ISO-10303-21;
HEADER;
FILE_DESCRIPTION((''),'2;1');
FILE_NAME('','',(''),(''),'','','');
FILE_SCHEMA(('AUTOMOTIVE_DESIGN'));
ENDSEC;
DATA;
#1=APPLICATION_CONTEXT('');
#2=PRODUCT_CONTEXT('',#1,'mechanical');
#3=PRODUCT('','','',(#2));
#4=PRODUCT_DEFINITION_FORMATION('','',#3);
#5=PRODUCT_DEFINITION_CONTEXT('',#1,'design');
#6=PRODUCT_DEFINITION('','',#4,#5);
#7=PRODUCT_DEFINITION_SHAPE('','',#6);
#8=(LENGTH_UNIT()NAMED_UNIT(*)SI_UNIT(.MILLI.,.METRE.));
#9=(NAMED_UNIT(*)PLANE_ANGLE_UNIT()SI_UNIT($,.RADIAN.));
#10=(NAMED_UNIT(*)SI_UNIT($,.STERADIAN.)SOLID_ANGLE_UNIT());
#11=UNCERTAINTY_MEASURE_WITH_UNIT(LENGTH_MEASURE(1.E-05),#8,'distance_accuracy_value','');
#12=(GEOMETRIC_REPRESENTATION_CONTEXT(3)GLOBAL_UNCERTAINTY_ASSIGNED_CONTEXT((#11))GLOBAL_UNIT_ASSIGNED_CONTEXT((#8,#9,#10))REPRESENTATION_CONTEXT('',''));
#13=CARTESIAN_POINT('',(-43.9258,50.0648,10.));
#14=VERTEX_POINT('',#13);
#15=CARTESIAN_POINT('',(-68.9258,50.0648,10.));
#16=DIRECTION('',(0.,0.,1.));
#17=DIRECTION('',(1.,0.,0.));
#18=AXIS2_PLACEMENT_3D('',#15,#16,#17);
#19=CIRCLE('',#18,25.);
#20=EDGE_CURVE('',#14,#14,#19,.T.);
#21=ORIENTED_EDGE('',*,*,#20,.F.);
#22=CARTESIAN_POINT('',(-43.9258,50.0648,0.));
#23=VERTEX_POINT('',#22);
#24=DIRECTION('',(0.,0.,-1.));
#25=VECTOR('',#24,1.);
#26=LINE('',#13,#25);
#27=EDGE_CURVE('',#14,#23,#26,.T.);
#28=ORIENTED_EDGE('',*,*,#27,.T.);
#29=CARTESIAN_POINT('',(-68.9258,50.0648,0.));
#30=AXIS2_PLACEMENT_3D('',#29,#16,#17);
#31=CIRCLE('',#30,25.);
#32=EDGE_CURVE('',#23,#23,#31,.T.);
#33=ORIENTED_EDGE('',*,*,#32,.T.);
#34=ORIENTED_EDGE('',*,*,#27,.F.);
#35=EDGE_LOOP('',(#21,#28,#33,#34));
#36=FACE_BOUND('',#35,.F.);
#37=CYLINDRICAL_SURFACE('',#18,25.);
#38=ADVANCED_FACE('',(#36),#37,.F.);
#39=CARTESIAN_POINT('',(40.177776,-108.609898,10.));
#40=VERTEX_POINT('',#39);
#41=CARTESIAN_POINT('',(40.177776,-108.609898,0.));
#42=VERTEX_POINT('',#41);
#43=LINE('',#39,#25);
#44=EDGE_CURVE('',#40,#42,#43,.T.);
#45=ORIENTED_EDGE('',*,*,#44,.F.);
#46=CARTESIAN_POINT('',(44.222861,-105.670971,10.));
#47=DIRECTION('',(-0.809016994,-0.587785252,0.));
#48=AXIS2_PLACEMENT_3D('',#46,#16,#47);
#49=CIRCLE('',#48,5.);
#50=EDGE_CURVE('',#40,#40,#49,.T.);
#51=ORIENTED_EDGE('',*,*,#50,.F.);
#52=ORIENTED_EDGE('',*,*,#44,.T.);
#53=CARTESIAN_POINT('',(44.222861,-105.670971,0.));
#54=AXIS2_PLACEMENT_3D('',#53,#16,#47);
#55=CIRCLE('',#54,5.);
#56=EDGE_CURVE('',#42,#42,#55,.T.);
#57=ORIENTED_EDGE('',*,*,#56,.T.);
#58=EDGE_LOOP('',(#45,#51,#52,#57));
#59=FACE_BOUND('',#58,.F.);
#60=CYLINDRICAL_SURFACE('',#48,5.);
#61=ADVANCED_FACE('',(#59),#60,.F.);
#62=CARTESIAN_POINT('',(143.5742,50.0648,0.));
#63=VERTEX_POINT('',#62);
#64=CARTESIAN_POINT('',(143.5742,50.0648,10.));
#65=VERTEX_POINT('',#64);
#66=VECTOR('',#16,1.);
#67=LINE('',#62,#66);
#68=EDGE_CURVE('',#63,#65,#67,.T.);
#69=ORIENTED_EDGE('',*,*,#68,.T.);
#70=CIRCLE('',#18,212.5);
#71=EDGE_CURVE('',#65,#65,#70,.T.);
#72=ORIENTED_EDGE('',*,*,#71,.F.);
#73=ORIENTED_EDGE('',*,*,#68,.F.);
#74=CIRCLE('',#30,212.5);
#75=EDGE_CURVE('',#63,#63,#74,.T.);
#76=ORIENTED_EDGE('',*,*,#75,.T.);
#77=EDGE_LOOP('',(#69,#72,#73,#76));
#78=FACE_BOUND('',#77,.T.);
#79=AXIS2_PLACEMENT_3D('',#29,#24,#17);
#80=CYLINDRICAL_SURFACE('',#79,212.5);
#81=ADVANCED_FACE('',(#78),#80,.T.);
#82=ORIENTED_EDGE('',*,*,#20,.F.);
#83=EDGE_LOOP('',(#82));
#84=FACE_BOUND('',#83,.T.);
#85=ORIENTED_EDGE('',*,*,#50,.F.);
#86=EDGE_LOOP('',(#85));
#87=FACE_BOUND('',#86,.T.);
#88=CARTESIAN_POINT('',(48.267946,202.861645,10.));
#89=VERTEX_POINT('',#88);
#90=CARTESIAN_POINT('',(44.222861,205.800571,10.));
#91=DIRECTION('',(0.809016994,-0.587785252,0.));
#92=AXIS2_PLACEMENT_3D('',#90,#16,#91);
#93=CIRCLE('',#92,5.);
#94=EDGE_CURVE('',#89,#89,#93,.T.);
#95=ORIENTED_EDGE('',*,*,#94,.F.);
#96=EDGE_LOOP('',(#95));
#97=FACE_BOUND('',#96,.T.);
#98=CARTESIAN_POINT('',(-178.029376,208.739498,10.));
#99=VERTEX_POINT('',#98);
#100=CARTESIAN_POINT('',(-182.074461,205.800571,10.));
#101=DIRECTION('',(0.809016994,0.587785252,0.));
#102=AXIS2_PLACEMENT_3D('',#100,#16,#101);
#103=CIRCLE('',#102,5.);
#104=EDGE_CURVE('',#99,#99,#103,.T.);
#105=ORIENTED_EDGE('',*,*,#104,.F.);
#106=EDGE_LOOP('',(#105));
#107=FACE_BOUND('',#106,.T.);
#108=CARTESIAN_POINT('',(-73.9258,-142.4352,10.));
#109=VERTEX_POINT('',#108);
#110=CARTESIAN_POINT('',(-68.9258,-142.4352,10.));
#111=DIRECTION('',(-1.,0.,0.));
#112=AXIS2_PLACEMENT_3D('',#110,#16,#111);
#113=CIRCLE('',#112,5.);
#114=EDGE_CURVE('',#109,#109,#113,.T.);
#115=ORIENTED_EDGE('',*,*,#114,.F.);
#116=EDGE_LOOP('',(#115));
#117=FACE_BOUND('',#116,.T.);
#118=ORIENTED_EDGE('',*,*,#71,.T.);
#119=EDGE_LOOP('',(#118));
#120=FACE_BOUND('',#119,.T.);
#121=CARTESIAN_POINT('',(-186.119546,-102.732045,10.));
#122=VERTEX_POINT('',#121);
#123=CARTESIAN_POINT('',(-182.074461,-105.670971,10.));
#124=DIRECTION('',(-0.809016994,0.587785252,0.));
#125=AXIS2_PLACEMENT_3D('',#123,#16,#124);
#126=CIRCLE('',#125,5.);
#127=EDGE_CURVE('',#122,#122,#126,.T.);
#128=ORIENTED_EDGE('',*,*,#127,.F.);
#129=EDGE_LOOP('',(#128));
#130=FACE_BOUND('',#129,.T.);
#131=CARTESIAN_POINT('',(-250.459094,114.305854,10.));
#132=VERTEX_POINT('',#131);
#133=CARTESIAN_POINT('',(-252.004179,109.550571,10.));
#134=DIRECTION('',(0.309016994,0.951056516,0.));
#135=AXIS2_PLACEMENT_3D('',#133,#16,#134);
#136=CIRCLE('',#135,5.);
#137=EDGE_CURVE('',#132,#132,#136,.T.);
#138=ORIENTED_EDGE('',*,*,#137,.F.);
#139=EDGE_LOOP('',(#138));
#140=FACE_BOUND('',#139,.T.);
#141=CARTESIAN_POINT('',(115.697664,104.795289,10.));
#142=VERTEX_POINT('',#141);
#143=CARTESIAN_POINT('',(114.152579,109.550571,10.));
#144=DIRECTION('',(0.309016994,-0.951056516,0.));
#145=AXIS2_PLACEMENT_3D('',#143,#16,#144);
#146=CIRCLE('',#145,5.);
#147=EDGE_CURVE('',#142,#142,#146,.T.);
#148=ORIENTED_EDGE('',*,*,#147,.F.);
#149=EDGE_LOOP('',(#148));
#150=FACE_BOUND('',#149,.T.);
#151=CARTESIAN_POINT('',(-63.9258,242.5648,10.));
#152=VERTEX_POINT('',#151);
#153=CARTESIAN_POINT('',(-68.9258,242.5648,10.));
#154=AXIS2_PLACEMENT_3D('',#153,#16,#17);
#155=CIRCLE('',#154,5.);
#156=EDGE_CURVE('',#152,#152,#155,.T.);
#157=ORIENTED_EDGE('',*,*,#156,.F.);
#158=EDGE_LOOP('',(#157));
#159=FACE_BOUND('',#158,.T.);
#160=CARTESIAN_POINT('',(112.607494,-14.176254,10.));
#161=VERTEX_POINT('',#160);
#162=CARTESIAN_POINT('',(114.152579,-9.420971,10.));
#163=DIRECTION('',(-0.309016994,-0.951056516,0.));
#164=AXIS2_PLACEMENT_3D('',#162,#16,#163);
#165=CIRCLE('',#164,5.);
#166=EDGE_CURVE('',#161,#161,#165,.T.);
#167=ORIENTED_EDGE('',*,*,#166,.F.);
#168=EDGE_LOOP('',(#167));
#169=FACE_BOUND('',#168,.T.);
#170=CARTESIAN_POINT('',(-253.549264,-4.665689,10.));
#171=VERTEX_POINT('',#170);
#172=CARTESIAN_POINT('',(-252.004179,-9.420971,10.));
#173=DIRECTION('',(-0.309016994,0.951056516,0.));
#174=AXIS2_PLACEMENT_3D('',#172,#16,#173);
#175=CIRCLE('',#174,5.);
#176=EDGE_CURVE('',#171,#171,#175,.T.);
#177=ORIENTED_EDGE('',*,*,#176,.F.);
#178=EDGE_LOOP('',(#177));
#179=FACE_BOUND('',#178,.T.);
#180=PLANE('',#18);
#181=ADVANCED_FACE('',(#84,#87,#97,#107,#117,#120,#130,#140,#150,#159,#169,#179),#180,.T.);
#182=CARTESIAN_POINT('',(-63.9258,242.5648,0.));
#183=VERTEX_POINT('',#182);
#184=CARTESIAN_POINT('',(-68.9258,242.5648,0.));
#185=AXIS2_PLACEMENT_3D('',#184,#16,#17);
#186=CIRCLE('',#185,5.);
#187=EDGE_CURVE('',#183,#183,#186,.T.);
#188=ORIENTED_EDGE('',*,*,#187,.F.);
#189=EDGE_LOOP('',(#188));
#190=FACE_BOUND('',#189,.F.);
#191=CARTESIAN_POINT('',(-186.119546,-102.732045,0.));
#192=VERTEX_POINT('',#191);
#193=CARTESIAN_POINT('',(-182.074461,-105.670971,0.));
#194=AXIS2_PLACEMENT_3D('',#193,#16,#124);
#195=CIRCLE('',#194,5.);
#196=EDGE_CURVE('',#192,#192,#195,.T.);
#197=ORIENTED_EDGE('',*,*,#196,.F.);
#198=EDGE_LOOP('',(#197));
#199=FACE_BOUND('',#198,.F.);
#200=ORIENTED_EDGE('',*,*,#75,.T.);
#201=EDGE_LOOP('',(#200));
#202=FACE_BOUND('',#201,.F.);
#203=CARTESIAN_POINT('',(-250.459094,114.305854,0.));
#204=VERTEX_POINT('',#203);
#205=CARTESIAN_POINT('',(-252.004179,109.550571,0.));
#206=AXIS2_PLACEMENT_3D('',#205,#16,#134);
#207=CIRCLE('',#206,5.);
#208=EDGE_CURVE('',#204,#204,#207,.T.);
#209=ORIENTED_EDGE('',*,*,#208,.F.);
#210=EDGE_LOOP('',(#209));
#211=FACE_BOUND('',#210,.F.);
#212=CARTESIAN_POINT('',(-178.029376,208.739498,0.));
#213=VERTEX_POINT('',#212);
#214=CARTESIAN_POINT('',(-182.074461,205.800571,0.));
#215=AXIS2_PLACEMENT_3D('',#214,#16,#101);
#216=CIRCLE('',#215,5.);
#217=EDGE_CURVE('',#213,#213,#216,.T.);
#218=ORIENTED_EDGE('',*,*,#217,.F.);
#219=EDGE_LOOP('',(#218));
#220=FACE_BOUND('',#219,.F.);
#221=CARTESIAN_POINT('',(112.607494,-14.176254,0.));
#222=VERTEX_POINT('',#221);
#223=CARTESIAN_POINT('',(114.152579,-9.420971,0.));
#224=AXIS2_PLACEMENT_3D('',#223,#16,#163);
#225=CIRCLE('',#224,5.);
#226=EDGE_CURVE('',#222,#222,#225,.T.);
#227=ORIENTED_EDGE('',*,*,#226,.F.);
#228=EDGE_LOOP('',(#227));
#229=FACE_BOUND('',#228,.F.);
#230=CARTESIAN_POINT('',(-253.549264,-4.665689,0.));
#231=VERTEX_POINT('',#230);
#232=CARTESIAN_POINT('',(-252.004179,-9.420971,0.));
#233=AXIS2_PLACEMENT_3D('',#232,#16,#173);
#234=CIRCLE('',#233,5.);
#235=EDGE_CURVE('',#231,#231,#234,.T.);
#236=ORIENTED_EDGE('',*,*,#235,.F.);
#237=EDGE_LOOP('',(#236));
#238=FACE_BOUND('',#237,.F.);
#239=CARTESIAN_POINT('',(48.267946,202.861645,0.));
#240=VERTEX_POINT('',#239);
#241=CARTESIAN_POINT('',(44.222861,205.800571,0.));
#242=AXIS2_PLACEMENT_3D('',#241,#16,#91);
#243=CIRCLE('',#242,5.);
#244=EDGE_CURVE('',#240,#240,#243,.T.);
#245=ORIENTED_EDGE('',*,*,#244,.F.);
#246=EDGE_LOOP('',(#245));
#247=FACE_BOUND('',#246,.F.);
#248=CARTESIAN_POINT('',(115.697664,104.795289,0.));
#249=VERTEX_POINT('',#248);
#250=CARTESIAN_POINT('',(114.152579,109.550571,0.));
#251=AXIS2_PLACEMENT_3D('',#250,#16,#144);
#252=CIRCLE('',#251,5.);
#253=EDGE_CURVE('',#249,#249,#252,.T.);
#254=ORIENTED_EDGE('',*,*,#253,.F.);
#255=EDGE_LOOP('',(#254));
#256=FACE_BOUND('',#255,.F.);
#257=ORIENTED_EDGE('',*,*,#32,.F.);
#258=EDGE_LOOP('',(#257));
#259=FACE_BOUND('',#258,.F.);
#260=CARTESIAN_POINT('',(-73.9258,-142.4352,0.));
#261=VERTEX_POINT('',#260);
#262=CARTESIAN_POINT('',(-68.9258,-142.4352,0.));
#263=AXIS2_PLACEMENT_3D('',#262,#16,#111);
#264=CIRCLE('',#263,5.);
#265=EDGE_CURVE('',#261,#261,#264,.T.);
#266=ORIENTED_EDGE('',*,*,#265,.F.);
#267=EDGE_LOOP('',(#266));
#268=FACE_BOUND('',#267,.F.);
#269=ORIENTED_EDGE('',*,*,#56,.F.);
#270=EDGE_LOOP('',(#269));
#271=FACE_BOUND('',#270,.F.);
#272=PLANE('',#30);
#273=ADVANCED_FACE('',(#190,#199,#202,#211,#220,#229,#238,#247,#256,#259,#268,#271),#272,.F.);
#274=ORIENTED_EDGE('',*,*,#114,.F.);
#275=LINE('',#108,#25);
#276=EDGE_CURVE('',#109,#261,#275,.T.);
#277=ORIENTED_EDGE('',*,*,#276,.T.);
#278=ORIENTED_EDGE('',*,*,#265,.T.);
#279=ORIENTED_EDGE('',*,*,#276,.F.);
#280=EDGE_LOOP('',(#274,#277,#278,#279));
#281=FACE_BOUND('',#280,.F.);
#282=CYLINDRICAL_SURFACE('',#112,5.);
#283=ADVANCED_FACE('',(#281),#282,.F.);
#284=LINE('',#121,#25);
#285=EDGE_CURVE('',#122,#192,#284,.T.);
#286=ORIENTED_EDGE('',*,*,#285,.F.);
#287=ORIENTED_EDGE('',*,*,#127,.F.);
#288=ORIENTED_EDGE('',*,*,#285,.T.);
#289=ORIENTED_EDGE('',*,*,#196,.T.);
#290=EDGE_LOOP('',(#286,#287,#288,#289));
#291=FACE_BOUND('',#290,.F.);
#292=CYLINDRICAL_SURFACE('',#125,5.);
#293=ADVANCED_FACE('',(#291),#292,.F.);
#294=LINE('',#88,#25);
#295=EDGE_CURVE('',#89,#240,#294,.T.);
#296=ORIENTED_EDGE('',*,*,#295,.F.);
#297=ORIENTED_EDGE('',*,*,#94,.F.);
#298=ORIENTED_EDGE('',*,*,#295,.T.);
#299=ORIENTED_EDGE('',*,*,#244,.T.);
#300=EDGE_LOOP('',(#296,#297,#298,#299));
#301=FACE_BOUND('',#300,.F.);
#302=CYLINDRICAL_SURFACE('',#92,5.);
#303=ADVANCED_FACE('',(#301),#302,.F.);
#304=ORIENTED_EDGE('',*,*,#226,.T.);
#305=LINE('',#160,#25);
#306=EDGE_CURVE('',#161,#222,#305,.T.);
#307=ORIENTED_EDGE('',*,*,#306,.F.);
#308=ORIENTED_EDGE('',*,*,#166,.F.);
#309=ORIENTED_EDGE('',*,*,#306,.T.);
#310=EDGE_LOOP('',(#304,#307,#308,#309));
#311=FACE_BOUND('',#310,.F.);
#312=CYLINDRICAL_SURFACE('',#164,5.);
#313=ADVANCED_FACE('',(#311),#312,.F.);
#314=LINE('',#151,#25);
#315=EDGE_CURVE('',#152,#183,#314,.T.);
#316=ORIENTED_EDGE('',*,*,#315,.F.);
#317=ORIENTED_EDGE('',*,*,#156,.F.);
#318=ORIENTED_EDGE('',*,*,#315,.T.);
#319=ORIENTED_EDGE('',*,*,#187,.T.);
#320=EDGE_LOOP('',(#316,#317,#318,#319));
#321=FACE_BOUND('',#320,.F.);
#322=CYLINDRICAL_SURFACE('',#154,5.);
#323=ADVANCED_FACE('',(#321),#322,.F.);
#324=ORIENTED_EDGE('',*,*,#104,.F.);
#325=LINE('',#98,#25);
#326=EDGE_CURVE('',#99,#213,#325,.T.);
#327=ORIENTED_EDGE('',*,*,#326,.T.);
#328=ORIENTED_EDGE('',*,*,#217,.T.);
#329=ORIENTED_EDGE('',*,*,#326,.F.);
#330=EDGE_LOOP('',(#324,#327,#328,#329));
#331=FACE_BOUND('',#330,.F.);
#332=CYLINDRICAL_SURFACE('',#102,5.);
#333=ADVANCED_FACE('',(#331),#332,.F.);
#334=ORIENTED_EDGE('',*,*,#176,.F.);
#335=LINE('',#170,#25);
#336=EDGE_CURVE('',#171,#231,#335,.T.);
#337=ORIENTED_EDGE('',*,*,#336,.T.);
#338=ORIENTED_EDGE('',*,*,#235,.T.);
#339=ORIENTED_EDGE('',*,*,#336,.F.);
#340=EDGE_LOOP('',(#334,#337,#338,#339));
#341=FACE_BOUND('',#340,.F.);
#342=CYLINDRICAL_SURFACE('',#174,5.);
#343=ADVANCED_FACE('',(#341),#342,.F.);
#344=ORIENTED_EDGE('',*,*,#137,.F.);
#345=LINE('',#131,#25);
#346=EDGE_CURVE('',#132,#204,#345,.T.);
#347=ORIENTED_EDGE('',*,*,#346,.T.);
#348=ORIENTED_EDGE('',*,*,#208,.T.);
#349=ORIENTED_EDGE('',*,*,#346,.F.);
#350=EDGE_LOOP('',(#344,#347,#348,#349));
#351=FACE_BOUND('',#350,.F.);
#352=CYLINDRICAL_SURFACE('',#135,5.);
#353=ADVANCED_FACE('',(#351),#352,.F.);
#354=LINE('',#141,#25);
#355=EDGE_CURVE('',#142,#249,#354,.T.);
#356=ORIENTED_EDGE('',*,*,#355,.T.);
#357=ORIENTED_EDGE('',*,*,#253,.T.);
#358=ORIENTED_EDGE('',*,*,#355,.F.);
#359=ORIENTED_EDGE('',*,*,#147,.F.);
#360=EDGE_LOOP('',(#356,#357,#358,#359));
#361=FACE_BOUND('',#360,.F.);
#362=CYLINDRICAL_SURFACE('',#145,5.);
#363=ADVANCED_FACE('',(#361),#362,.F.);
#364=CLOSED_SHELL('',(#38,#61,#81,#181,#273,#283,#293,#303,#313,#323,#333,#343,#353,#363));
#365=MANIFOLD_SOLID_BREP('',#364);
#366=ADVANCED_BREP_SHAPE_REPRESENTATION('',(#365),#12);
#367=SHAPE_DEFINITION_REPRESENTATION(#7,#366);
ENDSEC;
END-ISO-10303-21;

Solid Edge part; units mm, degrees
sketch "Sketch1" plane through (0, 0, 0) normal (0, 0, 1) x (1, 0, 0)
  circle A0 centre (-68.9258, 50.0648) radius 212.5
  dimension "D1" = 425
extrude "Protrusion1" add sketch "Sketch1" along normal blind 10
sketch "Sketch2" plane through (-68.9258, 50.0648, 10) normal (0, 0, 1) x (1, 0, 0)
  circle A0 centre (0, 192.5) radius 5
  dimension "D1" = 10
  dimension "D2" = 20
extrude "Cutout1" cut sketch "Sketch2" against normal through all
pattern_circular "Pattern1" count 10 over 360 about axis through (-68.9258, 50.0648, 10) along (0, 0, -1) of "Cutout1"
sketch "Sketch3" plane through (-68.9258, 50.0648, 10) normal (0, 0, 1) x (1, 0, 0)
  circle A0 centre (0, 0) radius 25
  dimension "D1" = 50
extrude "Cutout2" cut sketch "Sketch3" against normal through all
